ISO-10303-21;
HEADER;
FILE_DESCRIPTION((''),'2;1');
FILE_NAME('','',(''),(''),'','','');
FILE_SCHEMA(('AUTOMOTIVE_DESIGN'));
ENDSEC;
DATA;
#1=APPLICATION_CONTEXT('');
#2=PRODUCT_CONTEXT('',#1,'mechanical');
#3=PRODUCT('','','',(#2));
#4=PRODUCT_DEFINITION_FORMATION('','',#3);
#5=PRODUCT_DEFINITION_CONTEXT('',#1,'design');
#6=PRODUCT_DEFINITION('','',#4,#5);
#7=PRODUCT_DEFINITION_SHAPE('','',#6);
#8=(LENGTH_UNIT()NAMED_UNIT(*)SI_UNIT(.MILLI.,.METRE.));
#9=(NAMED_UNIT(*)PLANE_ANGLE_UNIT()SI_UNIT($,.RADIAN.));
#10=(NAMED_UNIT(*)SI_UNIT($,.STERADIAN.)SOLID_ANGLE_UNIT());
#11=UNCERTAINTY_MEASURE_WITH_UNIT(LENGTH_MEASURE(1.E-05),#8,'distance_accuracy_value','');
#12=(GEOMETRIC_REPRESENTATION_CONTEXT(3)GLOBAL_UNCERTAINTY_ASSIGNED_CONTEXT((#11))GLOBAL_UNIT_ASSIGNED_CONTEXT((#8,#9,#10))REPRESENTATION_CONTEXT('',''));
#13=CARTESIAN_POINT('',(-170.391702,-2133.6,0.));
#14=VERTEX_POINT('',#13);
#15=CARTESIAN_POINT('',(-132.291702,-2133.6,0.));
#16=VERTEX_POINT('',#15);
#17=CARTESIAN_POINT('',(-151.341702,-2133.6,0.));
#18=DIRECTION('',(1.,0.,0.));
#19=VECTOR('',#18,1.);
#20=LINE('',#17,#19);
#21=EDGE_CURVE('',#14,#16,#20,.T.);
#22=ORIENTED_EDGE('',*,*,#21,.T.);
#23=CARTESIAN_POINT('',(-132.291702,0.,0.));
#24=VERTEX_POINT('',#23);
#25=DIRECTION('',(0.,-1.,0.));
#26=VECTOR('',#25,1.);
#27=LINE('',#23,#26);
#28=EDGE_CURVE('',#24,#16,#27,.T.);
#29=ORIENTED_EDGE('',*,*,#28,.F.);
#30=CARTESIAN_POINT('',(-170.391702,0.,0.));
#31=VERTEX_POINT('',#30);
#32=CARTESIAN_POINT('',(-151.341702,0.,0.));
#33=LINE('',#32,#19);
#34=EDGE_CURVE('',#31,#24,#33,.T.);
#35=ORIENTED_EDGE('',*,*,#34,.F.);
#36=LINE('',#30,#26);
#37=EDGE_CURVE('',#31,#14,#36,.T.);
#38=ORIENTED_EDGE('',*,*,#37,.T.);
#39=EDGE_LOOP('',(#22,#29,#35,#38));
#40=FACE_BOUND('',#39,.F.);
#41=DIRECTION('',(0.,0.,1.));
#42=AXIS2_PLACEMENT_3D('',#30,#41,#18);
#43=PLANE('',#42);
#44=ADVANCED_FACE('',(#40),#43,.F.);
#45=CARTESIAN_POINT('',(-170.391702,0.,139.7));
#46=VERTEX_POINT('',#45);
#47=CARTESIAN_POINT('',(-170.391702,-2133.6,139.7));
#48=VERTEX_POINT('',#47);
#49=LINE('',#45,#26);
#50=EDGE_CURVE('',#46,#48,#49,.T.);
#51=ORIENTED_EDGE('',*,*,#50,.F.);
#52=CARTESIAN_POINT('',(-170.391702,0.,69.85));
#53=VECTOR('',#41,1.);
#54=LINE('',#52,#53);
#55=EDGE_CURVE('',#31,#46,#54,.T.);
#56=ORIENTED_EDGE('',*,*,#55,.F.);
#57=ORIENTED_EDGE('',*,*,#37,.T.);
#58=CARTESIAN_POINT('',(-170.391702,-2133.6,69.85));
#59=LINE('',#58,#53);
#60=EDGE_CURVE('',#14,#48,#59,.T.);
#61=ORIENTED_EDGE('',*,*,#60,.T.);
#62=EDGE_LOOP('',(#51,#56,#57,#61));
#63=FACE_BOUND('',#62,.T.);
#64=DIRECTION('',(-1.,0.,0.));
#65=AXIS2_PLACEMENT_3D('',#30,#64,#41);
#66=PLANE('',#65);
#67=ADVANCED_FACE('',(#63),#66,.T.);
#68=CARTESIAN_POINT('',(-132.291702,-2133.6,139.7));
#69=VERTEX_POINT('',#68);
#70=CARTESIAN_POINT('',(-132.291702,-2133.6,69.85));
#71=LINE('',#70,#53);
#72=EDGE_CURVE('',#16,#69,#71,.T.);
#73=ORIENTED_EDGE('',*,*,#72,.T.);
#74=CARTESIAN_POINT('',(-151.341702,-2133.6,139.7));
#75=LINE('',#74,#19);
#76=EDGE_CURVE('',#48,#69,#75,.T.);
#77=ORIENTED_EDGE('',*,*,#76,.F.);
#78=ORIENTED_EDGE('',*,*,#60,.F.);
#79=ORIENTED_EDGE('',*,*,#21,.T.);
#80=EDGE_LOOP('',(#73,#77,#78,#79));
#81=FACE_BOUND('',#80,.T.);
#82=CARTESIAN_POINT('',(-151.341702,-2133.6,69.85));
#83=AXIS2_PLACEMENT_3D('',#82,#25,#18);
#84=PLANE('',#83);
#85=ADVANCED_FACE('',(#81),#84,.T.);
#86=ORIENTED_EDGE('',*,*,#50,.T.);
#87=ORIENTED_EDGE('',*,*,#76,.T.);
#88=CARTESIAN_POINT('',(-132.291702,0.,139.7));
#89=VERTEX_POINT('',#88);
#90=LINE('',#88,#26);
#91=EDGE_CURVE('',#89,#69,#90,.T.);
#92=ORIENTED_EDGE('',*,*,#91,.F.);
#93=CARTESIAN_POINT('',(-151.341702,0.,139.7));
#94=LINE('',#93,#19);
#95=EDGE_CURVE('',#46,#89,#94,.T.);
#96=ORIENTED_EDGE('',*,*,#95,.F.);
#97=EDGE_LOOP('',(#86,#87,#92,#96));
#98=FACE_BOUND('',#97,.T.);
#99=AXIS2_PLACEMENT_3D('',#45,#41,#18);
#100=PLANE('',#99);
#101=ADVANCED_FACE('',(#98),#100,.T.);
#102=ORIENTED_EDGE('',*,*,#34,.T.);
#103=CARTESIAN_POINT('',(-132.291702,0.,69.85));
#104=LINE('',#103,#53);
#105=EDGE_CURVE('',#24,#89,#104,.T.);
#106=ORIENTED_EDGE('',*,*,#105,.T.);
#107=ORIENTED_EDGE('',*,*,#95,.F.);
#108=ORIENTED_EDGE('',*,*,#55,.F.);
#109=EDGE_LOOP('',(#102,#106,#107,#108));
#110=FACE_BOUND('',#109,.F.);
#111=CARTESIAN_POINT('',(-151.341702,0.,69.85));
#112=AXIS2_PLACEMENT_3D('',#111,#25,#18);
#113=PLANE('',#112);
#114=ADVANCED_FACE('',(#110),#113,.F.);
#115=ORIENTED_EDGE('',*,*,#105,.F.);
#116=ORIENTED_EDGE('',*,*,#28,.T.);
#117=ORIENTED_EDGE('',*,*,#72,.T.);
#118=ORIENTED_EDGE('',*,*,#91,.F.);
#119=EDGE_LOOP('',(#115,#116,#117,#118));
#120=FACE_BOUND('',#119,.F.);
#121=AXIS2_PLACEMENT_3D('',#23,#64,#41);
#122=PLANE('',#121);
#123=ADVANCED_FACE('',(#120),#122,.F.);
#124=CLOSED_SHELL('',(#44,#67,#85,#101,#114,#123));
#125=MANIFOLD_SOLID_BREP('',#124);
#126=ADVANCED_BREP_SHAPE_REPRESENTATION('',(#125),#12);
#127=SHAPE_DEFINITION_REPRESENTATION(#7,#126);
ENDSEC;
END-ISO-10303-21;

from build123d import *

# Parameters (mm, degrees)
F1_W     = 38.1
F1_H     = 139.7
F2_DEPTH = 2133.6


# Not quite as in the source:
# - a variable given as a bare number and used for a length is read in inches; the dataset says mm whatever the document's units were


with BuildPart() as f2:
    # F1 (on Front) → F2 (new body)
    with BuildSketch(Plane.XZ):
        with Locations((-151.3417023118, 69.85)):
            Rectangle(F1_W, F1_H)
    extrude(amount=F2_DEPTH)


solid = f2.part
